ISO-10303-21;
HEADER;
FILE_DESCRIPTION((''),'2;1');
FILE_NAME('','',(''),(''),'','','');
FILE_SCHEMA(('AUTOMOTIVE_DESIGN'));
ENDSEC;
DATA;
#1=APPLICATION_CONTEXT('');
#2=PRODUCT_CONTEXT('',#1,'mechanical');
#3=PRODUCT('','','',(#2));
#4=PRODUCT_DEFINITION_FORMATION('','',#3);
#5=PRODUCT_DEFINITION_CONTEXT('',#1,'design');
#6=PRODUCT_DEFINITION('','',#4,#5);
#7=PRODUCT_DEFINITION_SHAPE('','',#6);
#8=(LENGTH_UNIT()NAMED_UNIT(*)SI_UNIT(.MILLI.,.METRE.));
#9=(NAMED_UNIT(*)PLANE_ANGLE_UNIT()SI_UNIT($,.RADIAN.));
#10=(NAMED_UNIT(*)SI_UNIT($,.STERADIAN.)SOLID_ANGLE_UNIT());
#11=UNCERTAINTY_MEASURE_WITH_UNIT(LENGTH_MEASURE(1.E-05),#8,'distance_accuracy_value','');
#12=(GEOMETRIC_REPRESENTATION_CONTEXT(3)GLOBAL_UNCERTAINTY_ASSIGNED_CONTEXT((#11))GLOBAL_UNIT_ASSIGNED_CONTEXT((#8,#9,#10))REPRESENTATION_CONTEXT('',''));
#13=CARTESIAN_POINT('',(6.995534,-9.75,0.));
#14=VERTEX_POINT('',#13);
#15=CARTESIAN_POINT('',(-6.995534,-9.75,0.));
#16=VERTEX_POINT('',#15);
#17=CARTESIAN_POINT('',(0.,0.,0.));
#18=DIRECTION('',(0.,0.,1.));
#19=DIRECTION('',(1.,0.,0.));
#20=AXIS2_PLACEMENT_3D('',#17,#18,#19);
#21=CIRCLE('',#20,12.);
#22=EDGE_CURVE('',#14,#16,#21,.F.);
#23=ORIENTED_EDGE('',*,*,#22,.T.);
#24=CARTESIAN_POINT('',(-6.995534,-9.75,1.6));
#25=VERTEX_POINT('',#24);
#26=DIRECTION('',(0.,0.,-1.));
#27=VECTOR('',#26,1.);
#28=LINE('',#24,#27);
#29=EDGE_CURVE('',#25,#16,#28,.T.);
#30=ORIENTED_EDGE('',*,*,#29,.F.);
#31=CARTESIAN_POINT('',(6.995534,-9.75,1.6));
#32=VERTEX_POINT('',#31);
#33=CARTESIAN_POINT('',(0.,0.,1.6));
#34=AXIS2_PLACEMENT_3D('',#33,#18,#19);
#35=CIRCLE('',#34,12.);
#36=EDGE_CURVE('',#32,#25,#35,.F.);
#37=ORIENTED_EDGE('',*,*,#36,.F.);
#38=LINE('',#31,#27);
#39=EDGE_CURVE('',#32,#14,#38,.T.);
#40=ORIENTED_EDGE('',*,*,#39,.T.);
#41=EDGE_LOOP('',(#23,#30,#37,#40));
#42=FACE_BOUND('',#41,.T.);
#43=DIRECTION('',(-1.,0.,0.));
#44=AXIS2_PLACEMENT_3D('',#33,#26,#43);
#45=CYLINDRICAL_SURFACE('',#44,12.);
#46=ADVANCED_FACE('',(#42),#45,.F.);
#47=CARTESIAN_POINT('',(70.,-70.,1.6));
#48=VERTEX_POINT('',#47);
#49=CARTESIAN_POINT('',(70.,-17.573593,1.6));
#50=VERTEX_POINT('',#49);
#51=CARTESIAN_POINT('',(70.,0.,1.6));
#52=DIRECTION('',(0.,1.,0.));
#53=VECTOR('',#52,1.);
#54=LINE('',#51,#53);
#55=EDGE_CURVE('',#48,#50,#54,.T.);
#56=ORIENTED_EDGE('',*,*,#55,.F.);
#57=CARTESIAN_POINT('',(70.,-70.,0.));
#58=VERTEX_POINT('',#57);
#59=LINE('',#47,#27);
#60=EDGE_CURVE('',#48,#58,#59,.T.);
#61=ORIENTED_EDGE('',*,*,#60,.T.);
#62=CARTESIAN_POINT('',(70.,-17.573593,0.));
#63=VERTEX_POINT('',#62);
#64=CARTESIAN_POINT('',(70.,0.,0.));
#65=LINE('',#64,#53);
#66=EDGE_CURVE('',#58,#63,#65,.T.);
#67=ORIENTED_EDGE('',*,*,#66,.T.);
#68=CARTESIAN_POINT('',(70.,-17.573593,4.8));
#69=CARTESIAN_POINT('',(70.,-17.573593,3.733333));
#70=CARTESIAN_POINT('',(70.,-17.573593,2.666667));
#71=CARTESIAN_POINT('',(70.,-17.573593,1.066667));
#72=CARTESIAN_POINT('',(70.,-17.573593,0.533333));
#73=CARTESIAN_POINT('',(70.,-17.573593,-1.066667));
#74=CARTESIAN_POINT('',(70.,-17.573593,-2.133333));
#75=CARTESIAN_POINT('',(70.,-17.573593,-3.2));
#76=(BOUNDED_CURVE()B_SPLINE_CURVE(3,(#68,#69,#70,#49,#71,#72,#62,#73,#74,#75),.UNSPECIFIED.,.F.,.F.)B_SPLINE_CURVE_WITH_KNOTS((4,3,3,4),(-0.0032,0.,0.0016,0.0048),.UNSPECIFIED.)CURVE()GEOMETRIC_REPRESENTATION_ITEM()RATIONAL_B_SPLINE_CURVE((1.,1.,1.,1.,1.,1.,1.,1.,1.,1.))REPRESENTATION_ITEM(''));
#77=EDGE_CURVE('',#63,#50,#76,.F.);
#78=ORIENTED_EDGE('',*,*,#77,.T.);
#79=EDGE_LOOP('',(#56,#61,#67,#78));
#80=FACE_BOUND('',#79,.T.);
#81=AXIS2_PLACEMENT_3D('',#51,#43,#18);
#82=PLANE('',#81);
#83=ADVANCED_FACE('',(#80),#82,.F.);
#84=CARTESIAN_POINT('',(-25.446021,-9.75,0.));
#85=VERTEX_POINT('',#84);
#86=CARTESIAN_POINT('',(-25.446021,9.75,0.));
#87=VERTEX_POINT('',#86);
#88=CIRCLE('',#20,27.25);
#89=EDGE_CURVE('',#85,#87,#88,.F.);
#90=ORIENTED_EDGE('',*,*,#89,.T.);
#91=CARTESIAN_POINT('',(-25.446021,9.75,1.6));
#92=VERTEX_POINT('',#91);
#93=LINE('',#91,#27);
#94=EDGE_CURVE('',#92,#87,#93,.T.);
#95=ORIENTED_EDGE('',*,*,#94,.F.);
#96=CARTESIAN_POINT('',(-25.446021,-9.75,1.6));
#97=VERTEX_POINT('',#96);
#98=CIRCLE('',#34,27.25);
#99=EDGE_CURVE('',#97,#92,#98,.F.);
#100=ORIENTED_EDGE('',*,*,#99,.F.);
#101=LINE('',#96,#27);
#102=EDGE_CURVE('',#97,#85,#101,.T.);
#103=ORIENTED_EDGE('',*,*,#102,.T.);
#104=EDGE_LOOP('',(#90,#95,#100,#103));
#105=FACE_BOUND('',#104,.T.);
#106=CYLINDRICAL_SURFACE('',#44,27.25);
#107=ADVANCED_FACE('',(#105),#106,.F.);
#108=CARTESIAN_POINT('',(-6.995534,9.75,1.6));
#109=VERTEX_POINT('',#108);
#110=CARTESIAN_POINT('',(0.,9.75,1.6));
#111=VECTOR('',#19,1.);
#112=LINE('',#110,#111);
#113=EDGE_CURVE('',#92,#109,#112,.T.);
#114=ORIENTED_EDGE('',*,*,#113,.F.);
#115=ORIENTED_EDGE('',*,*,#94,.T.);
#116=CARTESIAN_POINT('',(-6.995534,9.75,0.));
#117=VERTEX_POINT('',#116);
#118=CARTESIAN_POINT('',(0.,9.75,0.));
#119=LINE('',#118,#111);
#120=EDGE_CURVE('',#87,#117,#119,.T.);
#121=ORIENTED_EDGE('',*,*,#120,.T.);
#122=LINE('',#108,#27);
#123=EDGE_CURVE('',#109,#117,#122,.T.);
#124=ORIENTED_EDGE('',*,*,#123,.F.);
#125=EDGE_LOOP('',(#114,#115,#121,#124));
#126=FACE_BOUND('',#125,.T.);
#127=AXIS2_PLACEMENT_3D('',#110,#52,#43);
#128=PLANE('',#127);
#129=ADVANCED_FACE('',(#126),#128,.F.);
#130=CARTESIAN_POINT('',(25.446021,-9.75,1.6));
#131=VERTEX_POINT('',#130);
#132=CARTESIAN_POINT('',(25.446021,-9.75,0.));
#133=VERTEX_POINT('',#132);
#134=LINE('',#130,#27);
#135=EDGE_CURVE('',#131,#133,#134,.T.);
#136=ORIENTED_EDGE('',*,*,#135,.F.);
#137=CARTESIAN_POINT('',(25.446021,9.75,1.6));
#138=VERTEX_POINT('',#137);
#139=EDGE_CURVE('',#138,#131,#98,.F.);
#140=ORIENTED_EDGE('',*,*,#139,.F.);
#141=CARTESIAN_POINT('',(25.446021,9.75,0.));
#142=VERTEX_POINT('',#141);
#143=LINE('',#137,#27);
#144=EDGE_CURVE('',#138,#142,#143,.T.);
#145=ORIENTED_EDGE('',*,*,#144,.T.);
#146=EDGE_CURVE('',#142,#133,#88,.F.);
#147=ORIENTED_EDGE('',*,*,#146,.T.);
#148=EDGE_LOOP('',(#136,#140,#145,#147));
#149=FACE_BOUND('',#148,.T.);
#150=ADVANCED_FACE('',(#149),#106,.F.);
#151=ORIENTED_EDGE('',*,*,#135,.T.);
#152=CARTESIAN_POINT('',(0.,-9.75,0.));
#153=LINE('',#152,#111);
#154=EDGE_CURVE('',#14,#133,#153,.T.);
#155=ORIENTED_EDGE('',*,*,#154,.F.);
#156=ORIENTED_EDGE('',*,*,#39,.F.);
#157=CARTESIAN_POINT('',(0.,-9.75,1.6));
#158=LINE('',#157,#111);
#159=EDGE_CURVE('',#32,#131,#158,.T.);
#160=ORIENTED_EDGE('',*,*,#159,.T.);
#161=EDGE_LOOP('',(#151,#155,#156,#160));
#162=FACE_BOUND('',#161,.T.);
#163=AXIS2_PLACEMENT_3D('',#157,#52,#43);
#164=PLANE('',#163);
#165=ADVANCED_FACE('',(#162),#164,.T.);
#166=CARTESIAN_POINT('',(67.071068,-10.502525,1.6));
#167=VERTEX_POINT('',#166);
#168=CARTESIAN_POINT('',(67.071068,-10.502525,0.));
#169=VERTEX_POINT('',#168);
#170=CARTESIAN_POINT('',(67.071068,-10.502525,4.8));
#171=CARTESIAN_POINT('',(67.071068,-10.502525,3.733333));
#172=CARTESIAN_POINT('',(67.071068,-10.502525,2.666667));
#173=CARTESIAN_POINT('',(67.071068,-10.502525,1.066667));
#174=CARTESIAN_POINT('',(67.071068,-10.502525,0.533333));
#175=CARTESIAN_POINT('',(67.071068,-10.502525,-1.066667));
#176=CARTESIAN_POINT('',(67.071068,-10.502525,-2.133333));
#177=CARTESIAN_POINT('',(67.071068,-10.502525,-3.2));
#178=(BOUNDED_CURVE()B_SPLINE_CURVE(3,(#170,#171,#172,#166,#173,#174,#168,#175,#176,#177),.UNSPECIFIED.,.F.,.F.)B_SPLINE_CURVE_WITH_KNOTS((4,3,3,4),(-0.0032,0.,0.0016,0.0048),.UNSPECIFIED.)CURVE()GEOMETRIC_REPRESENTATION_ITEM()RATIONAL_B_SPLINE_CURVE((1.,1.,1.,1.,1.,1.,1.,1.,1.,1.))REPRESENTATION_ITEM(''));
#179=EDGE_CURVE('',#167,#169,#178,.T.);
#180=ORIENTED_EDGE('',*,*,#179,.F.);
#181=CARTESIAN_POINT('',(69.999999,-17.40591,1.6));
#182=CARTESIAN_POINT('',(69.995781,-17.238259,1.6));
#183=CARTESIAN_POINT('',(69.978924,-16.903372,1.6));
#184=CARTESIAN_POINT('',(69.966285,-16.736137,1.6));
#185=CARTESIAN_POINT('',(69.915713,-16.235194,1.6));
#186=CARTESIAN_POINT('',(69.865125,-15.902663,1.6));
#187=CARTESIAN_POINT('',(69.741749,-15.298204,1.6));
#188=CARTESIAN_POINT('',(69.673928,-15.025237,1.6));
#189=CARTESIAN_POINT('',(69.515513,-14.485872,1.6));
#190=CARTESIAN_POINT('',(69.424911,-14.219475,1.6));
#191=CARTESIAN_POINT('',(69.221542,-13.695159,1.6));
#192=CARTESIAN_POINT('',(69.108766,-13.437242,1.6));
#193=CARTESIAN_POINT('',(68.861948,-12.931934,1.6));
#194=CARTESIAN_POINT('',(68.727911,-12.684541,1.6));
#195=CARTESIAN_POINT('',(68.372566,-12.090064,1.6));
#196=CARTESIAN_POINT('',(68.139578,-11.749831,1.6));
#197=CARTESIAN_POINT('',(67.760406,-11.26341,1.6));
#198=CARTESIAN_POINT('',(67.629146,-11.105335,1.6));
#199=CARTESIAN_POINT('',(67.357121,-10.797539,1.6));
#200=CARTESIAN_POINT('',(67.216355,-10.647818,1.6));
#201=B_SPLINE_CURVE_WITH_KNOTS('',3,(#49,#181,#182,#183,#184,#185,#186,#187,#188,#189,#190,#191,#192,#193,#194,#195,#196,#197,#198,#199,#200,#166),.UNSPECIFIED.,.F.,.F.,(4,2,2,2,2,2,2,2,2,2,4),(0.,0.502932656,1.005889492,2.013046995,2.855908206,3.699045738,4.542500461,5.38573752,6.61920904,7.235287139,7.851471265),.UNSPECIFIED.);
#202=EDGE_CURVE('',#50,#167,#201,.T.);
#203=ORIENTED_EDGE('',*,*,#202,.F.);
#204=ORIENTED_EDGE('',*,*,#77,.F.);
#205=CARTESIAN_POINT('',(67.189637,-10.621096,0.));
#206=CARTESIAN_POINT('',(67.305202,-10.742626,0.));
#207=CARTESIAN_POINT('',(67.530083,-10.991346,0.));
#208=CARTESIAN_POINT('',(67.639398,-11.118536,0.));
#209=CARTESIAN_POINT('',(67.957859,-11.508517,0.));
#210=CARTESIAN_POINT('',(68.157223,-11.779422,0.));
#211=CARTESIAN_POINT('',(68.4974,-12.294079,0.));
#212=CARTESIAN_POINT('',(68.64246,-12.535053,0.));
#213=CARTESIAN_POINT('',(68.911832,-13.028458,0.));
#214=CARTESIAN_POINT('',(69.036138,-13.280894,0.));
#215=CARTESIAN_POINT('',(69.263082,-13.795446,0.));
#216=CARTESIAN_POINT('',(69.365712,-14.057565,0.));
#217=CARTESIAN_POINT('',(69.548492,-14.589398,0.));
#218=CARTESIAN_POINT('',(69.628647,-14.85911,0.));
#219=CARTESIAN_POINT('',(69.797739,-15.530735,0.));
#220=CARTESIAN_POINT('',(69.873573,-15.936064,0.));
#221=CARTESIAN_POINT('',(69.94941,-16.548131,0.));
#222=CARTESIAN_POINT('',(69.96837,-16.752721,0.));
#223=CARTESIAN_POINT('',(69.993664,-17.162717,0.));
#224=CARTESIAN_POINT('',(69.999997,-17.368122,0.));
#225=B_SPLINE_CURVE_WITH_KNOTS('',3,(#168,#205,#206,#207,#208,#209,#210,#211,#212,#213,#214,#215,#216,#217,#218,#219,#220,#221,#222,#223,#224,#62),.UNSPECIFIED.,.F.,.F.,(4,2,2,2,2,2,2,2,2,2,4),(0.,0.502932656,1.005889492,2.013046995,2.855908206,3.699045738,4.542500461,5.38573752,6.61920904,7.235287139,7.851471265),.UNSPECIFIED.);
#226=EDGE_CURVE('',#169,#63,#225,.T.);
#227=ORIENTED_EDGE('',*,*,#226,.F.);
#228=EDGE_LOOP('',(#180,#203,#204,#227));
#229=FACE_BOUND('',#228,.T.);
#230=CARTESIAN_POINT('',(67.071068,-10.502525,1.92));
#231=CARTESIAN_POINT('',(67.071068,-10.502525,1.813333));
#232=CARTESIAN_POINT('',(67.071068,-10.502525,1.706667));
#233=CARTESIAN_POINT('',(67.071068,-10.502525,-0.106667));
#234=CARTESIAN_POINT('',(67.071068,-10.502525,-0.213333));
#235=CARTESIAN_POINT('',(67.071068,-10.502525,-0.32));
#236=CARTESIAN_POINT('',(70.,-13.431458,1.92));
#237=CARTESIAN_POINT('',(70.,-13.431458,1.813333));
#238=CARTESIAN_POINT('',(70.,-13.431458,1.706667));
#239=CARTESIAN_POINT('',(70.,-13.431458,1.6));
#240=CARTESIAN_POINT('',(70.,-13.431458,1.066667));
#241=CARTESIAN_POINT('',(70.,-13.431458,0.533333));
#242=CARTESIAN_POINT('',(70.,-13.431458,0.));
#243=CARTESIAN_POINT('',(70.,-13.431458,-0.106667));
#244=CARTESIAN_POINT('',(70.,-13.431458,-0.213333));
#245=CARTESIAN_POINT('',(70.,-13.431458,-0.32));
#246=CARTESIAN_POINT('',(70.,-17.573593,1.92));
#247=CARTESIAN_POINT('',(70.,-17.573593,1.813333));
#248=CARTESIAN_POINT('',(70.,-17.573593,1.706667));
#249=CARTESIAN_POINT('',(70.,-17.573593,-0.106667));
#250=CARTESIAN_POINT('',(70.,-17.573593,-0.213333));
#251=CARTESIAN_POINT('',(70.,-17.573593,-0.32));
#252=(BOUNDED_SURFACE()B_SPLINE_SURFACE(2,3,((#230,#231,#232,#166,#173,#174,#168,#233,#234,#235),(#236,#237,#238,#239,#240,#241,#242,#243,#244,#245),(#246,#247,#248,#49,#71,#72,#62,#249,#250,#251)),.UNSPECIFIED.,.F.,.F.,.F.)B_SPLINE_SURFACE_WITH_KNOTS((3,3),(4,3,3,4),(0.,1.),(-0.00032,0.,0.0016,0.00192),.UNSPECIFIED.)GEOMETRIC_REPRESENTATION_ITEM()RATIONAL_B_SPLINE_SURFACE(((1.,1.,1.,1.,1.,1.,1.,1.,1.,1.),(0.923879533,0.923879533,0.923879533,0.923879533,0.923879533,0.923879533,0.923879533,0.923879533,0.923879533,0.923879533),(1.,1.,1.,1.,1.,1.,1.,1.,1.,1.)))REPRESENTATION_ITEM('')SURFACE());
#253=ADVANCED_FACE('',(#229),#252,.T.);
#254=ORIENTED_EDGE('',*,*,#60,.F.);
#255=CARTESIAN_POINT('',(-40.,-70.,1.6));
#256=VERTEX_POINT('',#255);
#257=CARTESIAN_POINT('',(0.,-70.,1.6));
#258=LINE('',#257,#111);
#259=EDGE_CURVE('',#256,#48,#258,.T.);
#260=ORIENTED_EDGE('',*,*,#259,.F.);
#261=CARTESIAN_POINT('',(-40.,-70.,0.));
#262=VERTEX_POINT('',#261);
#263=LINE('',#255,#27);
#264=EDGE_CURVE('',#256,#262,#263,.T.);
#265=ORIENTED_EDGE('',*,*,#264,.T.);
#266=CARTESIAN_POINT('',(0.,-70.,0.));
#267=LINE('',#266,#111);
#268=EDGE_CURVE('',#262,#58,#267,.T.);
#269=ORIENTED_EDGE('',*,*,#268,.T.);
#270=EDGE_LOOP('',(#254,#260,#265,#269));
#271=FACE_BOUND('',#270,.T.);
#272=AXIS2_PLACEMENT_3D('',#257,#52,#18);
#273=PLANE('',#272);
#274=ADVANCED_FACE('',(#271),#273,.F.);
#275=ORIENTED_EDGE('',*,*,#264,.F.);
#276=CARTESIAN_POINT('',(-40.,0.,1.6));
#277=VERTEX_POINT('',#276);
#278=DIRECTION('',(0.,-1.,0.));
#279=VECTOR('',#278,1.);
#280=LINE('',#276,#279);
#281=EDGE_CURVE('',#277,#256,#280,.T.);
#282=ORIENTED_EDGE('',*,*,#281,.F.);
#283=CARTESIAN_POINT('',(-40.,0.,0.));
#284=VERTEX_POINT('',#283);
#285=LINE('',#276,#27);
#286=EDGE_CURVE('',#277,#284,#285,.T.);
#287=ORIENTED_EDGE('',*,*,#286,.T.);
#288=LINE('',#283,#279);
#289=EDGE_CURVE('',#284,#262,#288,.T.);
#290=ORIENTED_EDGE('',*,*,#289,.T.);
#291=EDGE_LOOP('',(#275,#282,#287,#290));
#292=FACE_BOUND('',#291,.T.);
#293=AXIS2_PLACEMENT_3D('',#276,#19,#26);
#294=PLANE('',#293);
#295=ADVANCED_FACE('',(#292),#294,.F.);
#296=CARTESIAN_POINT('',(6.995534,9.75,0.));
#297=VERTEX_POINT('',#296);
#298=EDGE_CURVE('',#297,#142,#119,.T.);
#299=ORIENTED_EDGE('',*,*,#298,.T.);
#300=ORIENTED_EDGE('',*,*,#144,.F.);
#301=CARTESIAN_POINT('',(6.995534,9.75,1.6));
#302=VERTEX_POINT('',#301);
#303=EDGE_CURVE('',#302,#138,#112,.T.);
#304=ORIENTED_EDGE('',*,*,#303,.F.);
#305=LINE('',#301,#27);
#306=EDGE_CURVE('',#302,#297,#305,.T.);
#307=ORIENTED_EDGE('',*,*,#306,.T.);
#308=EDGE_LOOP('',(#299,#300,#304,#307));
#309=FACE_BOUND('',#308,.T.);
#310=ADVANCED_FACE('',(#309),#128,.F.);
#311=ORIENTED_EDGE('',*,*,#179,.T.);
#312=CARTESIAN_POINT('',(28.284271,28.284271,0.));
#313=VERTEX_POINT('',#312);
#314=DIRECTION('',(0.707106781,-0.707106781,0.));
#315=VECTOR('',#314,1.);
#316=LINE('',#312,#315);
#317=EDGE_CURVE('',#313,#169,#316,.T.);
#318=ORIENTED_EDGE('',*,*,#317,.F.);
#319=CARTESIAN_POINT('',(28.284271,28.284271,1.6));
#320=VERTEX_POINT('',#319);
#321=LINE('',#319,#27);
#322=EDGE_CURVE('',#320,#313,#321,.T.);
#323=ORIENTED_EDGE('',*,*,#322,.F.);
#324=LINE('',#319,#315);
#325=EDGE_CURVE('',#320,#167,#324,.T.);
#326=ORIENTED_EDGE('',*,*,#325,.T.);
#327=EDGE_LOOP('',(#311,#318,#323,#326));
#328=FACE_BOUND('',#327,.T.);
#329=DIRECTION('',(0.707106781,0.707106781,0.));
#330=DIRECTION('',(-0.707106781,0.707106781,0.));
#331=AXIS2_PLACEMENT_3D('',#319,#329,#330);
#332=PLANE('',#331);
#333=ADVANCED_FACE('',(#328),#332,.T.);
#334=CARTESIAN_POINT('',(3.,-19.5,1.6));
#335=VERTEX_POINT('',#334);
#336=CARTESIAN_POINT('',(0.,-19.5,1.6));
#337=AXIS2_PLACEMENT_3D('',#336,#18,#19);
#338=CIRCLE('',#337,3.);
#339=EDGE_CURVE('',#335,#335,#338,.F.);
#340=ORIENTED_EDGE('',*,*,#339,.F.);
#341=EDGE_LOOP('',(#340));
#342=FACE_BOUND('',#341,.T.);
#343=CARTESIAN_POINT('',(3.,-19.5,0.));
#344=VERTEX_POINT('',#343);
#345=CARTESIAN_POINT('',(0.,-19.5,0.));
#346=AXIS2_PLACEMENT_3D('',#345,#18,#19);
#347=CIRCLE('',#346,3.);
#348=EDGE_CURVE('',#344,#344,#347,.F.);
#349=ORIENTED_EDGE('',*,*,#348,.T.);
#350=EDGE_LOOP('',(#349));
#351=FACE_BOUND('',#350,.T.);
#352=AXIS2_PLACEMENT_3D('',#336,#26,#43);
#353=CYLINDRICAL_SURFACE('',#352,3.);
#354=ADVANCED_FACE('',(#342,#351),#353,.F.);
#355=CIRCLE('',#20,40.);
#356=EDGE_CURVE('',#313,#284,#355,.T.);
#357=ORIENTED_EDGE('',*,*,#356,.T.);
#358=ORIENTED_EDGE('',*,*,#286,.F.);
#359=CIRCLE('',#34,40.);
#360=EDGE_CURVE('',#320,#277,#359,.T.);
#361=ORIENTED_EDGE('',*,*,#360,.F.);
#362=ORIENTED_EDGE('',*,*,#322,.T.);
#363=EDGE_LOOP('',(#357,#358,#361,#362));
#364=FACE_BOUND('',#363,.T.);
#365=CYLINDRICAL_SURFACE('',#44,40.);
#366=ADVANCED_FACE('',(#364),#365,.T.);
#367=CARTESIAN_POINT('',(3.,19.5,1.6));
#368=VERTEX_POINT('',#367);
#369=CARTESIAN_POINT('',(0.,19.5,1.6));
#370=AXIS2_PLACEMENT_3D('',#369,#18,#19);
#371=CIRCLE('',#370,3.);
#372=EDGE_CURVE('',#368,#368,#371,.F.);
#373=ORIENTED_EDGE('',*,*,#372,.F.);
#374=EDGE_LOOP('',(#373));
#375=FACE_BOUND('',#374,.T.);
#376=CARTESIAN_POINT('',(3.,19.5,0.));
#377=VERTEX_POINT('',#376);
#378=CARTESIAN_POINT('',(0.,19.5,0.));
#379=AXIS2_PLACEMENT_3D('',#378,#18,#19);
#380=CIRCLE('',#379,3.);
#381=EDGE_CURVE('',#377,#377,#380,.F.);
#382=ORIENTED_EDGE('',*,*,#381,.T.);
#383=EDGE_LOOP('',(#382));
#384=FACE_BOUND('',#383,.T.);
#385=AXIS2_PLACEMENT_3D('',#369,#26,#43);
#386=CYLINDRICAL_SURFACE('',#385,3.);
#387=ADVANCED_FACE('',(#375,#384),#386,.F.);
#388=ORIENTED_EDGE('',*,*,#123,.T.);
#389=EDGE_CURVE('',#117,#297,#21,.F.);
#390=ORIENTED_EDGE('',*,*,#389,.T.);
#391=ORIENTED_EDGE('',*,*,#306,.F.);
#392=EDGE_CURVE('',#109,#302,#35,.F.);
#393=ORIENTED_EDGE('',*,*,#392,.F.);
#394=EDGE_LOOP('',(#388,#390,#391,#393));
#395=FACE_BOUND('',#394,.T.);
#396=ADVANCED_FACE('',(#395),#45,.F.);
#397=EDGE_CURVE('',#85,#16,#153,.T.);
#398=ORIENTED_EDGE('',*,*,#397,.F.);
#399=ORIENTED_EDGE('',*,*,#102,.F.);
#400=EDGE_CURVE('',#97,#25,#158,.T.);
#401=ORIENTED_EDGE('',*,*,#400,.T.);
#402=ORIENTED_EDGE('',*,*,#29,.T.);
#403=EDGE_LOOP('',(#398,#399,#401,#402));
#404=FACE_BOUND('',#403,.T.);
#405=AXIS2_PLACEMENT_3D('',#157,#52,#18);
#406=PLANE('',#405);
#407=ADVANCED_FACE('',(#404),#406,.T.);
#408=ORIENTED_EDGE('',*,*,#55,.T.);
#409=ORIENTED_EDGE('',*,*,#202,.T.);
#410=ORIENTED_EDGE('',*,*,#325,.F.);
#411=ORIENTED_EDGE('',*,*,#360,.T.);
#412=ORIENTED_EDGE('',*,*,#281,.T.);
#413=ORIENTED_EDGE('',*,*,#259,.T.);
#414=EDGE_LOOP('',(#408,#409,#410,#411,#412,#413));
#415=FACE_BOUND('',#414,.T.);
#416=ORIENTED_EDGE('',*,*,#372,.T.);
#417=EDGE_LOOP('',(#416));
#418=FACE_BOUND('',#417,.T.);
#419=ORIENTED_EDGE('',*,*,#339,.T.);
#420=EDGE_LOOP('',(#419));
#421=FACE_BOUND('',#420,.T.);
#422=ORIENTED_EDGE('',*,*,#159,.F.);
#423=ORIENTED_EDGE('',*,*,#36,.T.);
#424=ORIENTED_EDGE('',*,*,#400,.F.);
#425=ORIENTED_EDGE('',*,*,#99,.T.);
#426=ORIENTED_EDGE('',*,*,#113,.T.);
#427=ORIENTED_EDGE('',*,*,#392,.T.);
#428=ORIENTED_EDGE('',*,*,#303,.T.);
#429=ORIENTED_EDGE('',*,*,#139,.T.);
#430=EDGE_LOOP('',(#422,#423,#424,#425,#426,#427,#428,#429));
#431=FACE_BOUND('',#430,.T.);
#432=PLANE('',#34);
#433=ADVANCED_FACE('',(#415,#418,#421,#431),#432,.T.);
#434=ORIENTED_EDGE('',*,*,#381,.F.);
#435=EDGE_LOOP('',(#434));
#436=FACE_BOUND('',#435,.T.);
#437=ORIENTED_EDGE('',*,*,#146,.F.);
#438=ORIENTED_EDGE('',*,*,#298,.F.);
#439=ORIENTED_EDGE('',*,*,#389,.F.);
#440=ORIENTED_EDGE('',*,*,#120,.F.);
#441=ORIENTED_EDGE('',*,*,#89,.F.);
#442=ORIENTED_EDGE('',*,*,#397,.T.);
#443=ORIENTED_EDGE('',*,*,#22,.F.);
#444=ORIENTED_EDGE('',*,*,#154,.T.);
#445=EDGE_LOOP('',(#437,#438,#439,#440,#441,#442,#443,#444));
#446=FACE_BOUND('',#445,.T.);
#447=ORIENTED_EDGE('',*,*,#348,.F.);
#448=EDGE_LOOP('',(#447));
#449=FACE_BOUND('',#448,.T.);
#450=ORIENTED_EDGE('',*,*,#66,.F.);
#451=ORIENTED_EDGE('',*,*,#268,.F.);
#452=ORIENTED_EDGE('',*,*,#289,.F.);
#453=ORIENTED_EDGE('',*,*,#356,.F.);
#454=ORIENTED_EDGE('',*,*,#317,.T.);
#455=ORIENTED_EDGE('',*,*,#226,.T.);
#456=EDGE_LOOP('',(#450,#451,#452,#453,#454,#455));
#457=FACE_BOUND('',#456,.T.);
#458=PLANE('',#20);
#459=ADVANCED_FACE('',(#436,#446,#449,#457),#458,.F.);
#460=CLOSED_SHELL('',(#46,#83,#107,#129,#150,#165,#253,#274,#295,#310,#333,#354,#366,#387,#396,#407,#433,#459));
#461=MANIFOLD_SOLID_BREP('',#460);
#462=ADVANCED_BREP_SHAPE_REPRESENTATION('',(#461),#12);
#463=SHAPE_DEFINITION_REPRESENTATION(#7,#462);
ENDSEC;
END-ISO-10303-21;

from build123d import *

# Parameters (mm, degrees)
SKETCH_2_R      = 3
EXTRUDE_2_DEPTH = 1.6
FILLET_1_R      = 10


with BuildPart() as part:
    # ｽｹｯﾁ2 → ﾎﾞｽ - 押し出し2 (new body)
    with BuildSketch(Plane.XY):
        with BuildLine():
            ThreePointArc((28.284271247, 28.284271247), (-15.307337295, 36.9551813), (-40, 0))
            Line((-40, 0), (-40, -70))
            Line((-40, -70), (70, -70))
            Line((70, -70), (70, -13.431457505))
            Line((70, -13.431457505), (28.284271247, 28.284271247))
        make_face()
        with Locations((0, -19.5)):
            Circle(SKETCH_2_R, mode=Mode.SUBTRACT)
        with BuildLine():
            Line((-6.99553429, -9.75), (-12.241706376, -9.75))
            Line((-12.241706376, -9.75), (-25.4460213, -9.75))
            ThreePointArc((-25.4460213, -9.75), (-27.25, 0), (-25.4460213, 9.75))
            Line((-25.4460213, 9.75), (-12.241706376, 9.75))
            Line((-12.241706376, 9.75), (-6.99553429, 9.75))
            ThreePointArc((-6.99553429, 9.75), (0, 12), (6.99553429, 9.75))
            Line((6.99553429, 9.75), (25.4460213, 9.75))
            ThreePointArc((25.4460213, 9.75), (27.25, 0), (25.4460213, -9.75))
            Line((25.4460213, -9.75), (9.75, -9.75))
            Line((9.75, -9.75), (6.99553429, -9.75))
            ThreePointArc((6.99553429, -9.75), (0, -12), (-6.99553429, -9.75))
        make_face(mode=Mode.SUBTRACT)
        with Locations((0, 19.5)):
            Circle(SKETCH_2_R, mode=Mode.SUBTRACT)
    extrude(amount=EXTRUDE_2_DEPTH)

    # 可変ﾌｨﾚｯﾄ1
    fillet_1_edges = [part.edges().sort_by_distance(p)[0] for p in [
        (70, -13.431457505, 0.8),
    ]]
    fillet(fillet_1_edges, radius=FILLET_1_R)


solid = part.part
